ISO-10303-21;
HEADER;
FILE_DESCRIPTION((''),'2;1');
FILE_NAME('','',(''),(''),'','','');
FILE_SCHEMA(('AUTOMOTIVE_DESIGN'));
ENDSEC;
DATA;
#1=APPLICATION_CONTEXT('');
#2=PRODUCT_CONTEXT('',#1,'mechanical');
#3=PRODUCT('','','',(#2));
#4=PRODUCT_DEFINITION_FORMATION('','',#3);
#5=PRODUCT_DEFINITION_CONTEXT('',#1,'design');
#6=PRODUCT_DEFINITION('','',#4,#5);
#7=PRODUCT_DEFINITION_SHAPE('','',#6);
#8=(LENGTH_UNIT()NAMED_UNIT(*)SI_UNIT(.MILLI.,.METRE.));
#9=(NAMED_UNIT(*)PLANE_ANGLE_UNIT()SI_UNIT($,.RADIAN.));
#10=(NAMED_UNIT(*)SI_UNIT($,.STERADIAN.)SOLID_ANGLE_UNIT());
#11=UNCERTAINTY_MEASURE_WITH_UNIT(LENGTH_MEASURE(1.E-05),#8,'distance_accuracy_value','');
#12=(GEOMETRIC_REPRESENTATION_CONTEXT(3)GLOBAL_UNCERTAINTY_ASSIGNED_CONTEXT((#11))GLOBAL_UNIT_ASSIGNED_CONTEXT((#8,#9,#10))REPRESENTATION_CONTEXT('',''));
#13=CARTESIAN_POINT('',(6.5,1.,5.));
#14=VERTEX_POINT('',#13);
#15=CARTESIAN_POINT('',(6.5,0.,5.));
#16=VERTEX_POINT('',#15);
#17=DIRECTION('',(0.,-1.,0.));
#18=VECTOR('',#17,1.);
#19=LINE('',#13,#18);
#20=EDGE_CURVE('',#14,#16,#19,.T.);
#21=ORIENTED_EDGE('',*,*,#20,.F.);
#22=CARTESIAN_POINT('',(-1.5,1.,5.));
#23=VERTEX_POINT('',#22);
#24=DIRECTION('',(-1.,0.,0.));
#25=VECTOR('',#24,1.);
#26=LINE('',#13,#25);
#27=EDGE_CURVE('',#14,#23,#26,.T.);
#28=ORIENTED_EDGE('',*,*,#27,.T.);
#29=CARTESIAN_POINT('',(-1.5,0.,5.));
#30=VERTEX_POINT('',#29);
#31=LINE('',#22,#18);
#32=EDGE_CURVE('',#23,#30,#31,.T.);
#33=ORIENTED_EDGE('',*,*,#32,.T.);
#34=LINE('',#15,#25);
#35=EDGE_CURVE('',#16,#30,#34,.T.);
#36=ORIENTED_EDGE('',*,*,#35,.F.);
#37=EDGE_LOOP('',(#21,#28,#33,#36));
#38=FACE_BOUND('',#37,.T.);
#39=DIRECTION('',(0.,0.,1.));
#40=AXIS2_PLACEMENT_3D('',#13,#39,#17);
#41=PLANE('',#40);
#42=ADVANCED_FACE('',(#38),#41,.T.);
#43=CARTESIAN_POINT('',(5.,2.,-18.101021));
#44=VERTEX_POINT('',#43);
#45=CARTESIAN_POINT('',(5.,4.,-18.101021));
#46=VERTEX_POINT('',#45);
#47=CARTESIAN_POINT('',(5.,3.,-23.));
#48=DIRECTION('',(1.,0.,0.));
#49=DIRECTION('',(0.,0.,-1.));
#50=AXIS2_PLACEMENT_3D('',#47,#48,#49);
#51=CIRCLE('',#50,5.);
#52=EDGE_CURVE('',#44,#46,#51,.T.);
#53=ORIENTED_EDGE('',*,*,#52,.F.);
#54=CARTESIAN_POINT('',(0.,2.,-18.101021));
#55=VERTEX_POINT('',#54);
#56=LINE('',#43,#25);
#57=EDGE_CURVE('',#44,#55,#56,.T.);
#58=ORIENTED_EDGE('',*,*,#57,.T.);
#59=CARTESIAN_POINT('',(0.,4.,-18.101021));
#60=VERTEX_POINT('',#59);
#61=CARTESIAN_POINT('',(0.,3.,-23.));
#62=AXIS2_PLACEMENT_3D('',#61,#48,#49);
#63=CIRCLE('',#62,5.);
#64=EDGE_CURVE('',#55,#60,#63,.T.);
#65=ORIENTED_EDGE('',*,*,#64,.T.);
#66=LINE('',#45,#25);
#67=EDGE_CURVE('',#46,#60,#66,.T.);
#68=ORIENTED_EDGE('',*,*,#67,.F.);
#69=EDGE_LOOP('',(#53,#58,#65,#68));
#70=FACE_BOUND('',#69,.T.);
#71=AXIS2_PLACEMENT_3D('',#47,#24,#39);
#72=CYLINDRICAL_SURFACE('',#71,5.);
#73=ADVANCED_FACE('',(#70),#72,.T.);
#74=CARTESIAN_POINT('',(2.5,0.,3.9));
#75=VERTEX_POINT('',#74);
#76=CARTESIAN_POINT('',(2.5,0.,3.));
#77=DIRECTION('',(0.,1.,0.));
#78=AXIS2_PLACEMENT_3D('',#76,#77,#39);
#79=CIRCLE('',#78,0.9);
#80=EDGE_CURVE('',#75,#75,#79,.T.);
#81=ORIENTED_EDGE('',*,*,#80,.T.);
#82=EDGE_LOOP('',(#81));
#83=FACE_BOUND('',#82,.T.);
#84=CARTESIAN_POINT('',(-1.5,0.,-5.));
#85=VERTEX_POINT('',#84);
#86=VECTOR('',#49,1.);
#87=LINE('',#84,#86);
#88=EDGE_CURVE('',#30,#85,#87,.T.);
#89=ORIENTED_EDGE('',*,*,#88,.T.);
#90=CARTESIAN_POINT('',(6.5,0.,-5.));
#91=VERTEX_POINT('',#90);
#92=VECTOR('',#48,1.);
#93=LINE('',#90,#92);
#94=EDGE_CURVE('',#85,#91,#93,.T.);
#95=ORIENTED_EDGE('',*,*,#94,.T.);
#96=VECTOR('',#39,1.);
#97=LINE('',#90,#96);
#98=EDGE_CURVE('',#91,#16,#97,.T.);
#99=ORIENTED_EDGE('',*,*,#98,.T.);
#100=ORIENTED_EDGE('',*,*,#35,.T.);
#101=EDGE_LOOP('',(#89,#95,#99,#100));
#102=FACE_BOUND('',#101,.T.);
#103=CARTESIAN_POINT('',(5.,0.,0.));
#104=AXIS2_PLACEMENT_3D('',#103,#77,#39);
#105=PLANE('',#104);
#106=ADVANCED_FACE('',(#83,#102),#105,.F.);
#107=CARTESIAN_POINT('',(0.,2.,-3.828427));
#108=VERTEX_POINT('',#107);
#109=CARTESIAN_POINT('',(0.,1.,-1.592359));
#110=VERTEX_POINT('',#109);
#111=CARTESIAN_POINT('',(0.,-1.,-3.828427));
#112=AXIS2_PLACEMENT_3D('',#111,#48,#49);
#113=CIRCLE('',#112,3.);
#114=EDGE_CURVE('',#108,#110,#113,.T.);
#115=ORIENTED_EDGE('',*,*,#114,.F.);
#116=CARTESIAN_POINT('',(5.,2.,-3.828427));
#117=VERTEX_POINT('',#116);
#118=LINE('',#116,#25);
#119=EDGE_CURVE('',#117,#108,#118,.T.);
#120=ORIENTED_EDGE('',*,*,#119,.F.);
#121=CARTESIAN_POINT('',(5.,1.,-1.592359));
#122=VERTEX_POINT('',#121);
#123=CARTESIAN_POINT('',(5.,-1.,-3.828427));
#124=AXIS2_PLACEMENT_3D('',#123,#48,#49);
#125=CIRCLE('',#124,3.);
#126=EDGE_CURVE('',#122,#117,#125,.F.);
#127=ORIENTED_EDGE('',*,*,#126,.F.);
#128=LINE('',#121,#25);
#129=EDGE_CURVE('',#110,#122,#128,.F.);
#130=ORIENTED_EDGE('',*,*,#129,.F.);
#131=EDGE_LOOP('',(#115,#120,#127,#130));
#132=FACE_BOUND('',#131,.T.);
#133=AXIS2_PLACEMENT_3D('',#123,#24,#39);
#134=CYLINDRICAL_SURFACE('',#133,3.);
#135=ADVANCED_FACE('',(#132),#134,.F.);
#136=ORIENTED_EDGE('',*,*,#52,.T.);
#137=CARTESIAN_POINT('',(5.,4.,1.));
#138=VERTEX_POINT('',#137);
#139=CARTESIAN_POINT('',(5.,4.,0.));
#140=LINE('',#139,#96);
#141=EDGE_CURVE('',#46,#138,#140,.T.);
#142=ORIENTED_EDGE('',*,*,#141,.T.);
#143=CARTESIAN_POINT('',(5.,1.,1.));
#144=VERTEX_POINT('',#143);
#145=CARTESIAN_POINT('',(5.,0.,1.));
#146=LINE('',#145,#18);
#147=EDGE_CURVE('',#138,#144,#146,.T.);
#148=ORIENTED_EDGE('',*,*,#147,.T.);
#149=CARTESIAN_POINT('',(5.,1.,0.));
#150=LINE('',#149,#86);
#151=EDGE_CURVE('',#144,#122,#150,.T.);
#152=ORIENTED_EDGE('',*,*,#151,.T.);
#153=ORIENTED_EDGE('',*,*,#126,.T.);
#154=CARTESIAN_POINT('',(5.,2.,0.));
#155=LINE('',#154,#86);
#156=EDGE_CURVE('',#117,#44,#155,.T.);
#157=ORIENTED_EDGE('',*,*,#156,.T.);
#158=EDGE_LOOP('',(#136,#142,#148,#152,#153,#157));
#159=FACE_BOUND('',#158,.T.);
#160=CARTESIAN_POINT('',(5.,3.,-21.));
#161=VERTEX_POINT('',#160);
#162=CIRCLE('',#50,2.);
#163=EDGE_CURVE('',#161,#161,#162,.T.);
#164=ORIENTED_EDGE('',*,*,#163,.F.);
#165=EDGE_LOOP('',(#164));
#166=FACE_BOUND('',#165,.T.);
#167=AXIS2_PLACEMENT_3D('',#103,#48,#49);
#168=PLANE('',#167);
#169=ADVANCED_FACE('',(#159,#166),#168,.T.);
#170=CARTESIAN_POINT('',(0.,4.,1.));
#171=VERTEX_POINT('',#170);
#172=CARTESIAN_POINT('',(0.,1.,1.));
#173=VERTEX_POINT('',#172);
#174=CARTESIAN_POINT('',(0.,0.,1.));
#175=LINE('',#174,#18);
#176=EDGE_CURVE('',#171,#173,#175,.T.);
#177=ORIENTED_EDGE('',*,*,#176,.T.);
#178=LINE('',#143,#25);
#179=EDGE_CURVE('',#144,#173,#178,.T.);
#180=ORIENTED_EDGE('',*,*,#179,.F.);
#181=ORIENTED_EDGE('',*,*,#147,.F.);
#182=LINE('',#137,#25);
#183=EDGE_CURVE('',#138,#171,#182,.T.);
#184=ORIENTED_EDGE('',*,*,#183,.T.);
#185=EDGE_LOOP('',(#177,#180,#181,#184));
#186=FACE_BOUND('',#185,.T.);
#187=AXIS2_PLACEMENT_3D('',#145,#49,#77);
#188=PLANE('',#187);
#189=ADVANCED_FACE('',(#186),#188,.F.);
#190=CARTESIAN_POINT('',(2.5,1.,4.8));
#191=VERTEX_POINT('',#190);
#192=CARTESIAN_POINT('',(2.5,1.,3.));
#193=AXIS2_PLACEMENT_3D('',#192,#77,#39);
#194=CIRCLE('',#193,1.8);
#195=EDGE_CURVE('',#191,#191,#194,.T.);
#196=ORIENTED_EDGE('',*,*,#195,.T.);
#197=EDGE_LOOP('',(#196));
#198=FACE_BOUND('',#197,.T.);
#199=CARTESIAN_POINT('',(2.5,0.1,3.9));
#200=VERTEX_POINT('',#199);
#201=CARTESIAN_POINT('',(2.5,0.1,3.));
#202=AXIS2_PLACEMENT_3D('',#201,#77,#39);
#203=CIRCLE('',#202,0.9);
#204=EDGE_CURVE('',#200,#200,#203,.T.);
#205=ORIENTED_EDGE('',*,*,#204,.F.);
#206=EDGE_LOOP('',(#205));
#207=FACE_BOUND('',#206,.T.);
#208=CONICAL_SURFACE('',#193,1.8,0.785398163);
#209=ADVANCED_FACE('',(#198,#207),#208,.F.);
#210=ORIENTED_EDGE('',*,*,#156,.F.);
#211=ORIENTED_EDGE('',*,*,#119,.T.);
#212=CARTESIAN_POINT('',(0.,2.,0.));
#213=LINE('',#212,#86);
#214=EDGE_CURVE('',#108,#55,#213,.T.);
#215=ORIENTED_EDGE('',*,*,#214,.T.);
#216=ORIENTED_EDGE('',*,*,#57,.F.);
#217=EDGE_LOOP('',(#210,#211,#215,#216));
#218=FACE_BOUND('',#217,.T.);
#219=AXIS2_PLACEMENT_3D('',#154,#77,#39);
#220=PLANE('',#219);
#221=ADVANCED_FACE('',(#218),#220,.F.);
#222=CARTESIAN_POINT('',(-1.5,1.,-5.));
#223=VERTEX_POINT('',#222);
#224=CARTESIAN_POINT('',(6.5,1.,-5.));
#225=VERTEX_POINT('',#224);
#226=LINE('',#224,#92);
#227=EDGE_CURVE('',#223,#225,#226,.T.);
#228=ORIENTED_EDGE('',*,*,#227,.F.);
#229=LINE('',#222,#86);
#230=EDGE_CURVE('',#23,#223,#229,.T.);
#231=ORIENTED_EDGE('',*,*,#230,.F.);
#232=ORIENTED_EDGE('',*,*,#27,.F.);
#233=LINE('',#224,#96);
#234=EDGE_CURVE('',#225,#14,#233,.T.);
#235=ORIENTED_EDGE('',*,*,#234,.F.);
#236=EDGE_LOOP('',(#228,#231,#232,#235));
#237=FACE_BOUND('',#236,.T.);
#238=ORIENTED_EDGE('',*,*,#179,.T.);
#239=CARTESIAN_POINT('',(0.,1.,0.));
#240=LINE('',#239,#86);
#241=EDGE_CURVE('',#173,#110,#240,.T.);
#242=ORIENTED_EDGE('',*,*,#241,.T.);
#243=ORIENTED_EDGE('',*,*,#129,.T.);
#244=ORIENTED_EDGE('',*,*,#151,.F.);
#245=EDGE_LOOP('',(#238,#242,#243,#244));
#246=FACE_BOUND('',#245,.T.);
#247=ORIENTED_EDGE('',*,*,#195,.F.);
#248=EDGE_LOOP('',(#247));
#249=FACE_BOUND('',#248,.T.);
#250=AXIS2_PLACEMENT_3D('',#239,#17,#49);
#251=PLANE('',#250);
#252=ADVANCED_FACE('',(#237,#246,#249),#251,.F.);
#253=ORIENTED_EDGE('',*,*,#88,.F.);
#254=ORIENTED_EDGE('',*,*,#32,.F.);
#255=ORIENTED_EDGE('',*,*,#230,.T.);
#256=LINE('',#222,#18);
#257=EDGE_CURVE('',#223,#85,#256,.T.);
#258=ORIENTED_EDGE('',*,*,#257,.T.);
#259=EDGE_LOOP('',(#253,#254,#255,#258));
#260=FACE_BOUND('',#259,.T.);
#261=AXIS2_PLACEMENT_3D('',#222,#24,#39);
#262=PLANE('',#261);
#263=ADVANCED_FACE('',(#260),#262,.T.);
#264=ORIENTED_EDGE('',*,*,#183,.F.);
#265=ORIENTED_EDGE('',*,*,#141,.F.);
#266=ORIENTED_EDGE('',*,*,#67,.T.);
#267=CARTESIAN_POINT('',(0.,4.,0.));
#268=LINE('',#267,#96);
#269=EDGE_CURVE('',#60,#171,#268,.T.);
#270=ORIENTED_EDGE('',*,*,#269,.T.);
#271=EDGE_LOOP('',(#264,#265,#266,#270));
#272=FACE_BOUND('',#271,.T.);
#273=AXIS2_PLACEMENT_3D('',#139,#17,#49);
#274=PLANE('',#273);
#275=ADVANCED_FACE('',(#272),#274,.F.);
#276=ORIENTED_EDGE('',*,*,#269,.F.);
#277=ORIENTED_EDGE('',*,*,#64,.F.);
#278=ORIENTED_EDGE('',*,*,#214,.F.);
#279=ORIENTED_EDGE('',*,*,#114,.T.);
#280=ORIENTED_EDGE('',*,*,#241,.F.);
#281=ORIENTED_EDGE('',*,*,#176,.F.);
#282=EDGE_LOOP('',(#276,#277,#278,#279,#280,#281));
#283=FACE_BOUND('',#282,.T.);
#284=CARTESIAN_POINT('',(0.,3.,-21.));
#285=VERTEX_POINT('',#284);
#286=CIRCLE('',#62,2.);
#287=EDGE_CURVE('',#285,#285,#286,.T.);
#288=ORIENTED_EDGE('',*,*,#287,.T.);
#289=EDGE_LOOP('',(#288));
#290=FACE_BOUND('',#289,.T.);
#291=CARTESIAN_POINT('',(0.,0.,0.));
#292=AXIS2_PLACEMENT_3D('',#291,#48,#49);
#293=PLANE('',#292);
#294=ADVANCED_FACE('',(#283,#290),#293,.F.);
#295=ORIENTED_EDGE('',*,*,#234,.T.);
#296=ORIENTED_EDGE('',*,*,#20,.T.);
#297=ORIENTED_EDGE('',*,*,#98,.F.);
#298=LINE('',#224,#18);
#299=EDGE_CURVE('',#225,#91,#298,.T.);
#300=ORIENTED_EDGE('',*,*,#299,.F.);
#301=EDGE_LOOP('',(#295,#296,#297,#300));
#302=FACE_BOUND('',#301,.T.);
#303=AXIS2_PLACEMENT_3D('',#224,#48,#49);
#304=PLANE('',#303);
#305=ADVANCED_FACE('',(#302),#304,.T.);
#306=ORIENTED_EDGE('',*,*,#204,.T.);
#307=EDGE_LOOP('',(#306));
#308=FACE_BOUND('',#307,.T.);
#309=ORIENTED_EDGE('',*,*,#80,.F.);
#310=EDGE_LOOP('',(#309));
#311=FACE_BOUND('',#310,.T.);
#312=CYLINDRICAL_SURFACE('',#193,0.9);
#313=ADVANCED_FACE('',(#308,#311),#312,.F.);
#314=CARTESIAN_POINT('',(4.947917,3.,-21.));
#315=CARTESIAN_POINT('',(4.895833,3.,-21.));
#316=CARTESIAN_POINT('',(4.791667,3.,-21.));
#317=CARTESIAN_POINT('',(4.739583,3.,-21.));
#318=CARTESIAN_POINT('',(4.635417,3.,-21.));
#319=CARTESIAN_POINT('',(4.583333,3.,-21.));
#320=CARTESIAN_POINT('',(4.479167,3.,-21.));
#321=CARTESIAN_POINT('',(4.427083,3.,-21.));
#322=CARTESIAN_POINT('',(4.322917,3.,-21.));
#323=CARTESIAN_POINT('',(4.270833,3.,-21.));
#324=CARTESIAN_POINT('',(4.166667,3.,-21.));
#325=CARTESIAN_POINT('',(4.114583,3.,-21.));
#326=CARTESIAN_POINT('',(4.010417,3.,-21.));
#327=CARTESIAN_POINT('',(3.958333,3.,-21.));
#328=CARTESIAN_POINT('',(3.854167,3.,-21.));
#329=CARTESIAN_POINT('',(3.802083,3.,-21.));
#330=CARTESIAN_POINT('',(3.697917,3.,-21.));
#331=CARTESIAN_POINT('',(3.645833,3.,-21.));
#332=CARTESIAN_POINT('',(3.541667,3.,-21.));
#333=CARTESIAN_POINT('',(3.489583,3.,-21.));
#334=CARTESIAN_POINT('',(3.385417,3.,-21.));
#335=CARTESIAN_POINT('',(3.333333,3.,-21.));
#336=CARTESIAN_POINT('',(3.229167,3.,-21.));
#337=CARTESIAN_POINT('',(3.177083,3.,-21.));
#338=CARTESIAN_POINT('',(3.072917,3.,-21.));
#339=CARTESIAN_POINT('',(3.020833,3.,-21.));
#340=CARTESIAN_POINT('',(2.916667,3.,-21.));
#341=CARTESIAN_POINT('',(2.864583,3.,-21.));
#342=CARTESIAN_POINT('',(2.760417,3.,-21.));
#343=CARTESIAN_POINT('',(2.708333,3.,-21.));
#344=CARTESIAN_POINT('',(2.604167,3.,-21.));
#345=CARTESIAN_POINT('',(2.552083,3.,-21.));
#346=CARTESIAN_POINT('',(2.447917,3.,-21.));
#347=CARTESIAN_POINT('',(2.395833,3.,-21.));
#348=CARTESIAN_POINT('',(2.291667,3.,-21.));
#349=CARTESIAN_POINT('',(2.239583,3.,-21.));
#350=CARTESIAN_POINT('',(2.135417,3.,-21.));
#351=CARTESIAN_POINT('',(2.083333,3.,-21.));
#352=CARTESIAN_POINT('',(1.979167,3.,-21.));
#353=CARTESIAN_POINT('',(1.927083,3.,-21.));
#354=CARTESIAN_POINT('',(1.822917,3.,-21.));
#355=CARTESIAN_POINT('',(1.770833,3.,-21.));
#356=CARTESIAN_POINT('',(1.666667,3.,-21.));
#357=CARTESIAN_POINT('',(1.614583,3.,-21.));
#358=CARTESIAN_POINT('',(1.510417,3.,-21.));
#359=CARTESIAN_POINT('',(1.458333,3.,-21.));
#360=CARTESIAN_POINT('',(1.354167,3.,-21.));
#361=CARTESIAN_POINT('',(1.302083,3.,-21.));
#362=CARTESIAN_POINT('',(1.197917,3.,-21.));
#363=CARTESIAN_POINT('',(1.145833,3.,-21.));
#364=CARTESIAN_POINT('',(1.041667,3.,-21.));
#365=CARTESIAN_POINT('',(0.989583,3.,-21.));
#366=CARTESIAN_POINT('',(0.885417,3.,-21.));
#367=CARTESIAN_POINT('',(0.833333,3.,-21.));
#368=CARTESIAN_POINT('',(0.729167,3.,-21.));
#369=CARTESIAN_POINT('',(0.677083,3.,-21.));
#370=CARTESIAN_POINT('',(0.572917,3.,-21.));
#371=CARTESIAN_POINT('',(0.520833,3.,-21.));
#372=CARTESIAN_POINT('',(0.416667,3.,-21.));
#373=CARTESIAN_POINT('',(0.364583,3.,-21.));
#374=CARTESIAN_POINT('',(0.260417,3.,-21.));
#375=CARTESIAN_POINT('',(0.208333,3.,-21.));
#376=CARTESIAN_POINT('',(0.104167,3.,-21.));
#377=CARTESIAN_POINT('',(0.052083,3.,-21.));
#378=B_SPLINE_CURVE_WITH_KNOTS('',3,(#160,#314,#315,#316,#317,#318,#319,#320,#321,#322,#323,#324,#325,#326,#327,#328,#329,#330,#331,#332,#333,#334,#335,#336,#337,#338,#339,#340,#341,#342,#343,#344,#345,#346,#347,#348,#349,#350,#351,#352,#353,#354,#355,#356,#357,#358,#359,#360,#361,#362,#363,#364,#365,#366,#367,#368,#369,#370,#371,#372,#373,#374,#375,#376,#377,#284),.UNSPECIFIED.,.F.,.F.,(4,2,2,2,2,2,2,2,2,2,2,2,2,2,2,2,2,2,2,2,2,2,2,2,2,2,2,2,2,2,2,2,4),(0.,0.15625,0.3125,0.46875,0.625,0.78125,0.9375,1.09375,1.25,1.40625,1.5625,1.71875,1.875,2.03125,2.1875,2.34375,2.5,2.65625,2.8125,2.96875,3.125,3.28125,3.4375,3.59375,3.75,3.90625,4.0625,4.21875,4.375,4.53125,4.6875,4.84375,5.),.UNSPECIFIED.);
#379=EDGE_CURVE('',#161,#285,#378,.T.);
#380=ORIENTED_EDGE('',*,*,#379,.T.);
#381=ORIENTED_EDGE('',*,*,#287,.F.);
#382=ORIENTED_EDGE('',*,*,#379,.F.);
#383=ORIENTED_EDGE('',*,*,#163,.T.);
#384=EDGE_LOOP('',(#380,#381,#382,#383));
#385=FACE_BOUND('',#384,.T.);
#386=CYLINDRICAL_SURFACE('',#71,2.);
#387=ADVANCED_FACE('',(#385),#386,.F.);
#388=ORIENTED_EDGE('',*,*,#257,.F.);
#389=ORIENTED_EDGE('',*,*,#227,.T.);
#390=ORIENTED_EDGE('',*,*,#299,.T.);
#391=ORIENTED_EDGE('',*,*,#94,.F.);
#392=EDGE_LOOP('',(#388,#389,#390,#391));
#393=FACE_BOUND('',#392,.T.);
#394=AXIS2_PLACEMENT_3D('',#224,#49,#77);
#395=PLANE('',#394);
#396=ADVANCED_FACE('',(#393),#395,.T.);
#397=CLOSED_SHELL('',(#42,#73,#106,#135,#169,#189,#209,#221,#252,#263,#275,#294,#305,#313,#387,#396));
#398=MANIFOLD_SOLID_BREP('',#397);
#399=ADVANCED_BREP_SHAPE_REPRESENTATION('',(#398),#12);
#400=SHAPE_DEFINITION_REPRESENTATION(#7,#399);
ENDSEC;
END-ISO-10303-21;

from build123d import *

# Parameters (mm, degrees)
SKETCH1_R                                            = 2
BOSS_EXTRUDE1_DEPTH                                  = 5
FILLET1_R                                            = 3
SKETCH2_W                                            = 8
SKETCH2_H                                            = 10
BOSS_EXTRUDE3_DEPTH                                  = 1
CSK_FOR_M1_6_COUNTERSUNK_FLAT_HEAD_SCREW_D           = 1.8
CSK_FOR_M1_6_COUNTERSUNK_FLAT_HEAD_SCREW_DEPTH       = 30
CSK_FOR_M1_6_COUNTERSUNK_FLAT_HEAD_SCREW_CSINK_D     = 3.6
CSK_FOR_M1_6_COUNTERSUNK_FLAT_HEAD_SCREW_CSINK_ANGLE = 90
CSK_FOR_M1_6_COUNTERSUNK_FLAT_HEAD_SCREW_TIP         = 0.540774557


with BuildPart() as part:
    # Sketch1 → Boss-Extrude1 (new body)
    with BuildSketch(Plane(origin=(0, 0, 0), x_dir=(0, 0, -1), z_dir=(1, 0, 0))):
        with BuildLine():
            Line((1, 2), (18.101020514, 2))
            ThreePointArc((18.101020514, 2), (28, 3), (18.101020514, 4))
            Line((18.101020514, 4), (-1, 4))
            Line((-1, 4), (-1, 0))
            Line((-1, 0), (1, 0))
            Line((1, 0), (1, 2))
        make_face()
        with Locations((23, 3)):
            Circle(SKETCH1_R, mode=Mode.SUBTRACT)
    extrude(amount=BOSS_EXTRUDE1_DEPTH)

    # Fillet1
    # the kernel refuses this fillet: 3 mm, written as the material it adds along each edge
    with BuildSketch(Plane(origin=(0, 2, -1), x_dir=(0, 0, -1), z_dir=(1, 0, 0))) as fillet1_piece_1:
        with BuildLine():
            CenterArc((2.828427125, -3), FILLET1_R, 90, 70.528779366)
            Line((0, -2), (-0.056568542, -1.98))
            ThreePointArc((-0.056568542, -1.98), (-0.06, -1), (-0.06, 0))
            Line((-0.06, 0), (0, 0.06))
            Line((0, 0.06), (2.828427125, 0.06))
            Line((2.828427125, 0.06), (2.828427125, 0))
        make_face()
    extrude(amount=5)

    # Sketch2 → Boss-Extrude3 (add)
    with BuildSketch(Plane.XZ):
        with Locations((2.5, 0)):
            Rectangle(SKETCH2_W, SKETCH2_H)
    extrude(amount=-BOSS_EXTRUDE3_DEPTH)

    # CSK for M1.6 Countersunk Flat Head Screw1
    with Locations(Plane(origin=(0, 1, 0), x_dir=(1, 0, 0), z_dir=(0, 1, 0))):
        with Locations((2.5, -3)):
            CounterSinkHole(CSK_FOR_M1_6_COUNTERSUNK_FLAT_HEAD_SCREW_D / 2, CSK_FOR_M1_6_COUNTERSUNK_FLAT_HEAD_SCREW_CSINK_D / 2, depth=CSK_FOR_M1_6_COUNTERSUNK_FLAT_HEAD_SCREW_DEPTH, counter_sink_angle=CSK_FOR_M1_6_COUNTERSUNK_FLAT_HEAD_SCREW_CSINK_ANGLE)
            with Locations((0, 0, -(CSK_FOR_M1_6_COUNTERSUNK_FLAT_HEAD_SCREW_DEPTH + CSK_FOR_M1_6_COUNTERSUNK_FLAT_HEAD_SCREW_TIP / 2))):  # 118° drill point
                Cone(0, CSK_FOR_M1_6_COUNTERSUNK_FLAT_HEAD_SCREW_D / 2, CSK_FOR_M1_6_COUNTERSUNK_FLAT_HEAD_SCREW_TIP, mode=Mode.SUBTRACT)


solid = part.part
